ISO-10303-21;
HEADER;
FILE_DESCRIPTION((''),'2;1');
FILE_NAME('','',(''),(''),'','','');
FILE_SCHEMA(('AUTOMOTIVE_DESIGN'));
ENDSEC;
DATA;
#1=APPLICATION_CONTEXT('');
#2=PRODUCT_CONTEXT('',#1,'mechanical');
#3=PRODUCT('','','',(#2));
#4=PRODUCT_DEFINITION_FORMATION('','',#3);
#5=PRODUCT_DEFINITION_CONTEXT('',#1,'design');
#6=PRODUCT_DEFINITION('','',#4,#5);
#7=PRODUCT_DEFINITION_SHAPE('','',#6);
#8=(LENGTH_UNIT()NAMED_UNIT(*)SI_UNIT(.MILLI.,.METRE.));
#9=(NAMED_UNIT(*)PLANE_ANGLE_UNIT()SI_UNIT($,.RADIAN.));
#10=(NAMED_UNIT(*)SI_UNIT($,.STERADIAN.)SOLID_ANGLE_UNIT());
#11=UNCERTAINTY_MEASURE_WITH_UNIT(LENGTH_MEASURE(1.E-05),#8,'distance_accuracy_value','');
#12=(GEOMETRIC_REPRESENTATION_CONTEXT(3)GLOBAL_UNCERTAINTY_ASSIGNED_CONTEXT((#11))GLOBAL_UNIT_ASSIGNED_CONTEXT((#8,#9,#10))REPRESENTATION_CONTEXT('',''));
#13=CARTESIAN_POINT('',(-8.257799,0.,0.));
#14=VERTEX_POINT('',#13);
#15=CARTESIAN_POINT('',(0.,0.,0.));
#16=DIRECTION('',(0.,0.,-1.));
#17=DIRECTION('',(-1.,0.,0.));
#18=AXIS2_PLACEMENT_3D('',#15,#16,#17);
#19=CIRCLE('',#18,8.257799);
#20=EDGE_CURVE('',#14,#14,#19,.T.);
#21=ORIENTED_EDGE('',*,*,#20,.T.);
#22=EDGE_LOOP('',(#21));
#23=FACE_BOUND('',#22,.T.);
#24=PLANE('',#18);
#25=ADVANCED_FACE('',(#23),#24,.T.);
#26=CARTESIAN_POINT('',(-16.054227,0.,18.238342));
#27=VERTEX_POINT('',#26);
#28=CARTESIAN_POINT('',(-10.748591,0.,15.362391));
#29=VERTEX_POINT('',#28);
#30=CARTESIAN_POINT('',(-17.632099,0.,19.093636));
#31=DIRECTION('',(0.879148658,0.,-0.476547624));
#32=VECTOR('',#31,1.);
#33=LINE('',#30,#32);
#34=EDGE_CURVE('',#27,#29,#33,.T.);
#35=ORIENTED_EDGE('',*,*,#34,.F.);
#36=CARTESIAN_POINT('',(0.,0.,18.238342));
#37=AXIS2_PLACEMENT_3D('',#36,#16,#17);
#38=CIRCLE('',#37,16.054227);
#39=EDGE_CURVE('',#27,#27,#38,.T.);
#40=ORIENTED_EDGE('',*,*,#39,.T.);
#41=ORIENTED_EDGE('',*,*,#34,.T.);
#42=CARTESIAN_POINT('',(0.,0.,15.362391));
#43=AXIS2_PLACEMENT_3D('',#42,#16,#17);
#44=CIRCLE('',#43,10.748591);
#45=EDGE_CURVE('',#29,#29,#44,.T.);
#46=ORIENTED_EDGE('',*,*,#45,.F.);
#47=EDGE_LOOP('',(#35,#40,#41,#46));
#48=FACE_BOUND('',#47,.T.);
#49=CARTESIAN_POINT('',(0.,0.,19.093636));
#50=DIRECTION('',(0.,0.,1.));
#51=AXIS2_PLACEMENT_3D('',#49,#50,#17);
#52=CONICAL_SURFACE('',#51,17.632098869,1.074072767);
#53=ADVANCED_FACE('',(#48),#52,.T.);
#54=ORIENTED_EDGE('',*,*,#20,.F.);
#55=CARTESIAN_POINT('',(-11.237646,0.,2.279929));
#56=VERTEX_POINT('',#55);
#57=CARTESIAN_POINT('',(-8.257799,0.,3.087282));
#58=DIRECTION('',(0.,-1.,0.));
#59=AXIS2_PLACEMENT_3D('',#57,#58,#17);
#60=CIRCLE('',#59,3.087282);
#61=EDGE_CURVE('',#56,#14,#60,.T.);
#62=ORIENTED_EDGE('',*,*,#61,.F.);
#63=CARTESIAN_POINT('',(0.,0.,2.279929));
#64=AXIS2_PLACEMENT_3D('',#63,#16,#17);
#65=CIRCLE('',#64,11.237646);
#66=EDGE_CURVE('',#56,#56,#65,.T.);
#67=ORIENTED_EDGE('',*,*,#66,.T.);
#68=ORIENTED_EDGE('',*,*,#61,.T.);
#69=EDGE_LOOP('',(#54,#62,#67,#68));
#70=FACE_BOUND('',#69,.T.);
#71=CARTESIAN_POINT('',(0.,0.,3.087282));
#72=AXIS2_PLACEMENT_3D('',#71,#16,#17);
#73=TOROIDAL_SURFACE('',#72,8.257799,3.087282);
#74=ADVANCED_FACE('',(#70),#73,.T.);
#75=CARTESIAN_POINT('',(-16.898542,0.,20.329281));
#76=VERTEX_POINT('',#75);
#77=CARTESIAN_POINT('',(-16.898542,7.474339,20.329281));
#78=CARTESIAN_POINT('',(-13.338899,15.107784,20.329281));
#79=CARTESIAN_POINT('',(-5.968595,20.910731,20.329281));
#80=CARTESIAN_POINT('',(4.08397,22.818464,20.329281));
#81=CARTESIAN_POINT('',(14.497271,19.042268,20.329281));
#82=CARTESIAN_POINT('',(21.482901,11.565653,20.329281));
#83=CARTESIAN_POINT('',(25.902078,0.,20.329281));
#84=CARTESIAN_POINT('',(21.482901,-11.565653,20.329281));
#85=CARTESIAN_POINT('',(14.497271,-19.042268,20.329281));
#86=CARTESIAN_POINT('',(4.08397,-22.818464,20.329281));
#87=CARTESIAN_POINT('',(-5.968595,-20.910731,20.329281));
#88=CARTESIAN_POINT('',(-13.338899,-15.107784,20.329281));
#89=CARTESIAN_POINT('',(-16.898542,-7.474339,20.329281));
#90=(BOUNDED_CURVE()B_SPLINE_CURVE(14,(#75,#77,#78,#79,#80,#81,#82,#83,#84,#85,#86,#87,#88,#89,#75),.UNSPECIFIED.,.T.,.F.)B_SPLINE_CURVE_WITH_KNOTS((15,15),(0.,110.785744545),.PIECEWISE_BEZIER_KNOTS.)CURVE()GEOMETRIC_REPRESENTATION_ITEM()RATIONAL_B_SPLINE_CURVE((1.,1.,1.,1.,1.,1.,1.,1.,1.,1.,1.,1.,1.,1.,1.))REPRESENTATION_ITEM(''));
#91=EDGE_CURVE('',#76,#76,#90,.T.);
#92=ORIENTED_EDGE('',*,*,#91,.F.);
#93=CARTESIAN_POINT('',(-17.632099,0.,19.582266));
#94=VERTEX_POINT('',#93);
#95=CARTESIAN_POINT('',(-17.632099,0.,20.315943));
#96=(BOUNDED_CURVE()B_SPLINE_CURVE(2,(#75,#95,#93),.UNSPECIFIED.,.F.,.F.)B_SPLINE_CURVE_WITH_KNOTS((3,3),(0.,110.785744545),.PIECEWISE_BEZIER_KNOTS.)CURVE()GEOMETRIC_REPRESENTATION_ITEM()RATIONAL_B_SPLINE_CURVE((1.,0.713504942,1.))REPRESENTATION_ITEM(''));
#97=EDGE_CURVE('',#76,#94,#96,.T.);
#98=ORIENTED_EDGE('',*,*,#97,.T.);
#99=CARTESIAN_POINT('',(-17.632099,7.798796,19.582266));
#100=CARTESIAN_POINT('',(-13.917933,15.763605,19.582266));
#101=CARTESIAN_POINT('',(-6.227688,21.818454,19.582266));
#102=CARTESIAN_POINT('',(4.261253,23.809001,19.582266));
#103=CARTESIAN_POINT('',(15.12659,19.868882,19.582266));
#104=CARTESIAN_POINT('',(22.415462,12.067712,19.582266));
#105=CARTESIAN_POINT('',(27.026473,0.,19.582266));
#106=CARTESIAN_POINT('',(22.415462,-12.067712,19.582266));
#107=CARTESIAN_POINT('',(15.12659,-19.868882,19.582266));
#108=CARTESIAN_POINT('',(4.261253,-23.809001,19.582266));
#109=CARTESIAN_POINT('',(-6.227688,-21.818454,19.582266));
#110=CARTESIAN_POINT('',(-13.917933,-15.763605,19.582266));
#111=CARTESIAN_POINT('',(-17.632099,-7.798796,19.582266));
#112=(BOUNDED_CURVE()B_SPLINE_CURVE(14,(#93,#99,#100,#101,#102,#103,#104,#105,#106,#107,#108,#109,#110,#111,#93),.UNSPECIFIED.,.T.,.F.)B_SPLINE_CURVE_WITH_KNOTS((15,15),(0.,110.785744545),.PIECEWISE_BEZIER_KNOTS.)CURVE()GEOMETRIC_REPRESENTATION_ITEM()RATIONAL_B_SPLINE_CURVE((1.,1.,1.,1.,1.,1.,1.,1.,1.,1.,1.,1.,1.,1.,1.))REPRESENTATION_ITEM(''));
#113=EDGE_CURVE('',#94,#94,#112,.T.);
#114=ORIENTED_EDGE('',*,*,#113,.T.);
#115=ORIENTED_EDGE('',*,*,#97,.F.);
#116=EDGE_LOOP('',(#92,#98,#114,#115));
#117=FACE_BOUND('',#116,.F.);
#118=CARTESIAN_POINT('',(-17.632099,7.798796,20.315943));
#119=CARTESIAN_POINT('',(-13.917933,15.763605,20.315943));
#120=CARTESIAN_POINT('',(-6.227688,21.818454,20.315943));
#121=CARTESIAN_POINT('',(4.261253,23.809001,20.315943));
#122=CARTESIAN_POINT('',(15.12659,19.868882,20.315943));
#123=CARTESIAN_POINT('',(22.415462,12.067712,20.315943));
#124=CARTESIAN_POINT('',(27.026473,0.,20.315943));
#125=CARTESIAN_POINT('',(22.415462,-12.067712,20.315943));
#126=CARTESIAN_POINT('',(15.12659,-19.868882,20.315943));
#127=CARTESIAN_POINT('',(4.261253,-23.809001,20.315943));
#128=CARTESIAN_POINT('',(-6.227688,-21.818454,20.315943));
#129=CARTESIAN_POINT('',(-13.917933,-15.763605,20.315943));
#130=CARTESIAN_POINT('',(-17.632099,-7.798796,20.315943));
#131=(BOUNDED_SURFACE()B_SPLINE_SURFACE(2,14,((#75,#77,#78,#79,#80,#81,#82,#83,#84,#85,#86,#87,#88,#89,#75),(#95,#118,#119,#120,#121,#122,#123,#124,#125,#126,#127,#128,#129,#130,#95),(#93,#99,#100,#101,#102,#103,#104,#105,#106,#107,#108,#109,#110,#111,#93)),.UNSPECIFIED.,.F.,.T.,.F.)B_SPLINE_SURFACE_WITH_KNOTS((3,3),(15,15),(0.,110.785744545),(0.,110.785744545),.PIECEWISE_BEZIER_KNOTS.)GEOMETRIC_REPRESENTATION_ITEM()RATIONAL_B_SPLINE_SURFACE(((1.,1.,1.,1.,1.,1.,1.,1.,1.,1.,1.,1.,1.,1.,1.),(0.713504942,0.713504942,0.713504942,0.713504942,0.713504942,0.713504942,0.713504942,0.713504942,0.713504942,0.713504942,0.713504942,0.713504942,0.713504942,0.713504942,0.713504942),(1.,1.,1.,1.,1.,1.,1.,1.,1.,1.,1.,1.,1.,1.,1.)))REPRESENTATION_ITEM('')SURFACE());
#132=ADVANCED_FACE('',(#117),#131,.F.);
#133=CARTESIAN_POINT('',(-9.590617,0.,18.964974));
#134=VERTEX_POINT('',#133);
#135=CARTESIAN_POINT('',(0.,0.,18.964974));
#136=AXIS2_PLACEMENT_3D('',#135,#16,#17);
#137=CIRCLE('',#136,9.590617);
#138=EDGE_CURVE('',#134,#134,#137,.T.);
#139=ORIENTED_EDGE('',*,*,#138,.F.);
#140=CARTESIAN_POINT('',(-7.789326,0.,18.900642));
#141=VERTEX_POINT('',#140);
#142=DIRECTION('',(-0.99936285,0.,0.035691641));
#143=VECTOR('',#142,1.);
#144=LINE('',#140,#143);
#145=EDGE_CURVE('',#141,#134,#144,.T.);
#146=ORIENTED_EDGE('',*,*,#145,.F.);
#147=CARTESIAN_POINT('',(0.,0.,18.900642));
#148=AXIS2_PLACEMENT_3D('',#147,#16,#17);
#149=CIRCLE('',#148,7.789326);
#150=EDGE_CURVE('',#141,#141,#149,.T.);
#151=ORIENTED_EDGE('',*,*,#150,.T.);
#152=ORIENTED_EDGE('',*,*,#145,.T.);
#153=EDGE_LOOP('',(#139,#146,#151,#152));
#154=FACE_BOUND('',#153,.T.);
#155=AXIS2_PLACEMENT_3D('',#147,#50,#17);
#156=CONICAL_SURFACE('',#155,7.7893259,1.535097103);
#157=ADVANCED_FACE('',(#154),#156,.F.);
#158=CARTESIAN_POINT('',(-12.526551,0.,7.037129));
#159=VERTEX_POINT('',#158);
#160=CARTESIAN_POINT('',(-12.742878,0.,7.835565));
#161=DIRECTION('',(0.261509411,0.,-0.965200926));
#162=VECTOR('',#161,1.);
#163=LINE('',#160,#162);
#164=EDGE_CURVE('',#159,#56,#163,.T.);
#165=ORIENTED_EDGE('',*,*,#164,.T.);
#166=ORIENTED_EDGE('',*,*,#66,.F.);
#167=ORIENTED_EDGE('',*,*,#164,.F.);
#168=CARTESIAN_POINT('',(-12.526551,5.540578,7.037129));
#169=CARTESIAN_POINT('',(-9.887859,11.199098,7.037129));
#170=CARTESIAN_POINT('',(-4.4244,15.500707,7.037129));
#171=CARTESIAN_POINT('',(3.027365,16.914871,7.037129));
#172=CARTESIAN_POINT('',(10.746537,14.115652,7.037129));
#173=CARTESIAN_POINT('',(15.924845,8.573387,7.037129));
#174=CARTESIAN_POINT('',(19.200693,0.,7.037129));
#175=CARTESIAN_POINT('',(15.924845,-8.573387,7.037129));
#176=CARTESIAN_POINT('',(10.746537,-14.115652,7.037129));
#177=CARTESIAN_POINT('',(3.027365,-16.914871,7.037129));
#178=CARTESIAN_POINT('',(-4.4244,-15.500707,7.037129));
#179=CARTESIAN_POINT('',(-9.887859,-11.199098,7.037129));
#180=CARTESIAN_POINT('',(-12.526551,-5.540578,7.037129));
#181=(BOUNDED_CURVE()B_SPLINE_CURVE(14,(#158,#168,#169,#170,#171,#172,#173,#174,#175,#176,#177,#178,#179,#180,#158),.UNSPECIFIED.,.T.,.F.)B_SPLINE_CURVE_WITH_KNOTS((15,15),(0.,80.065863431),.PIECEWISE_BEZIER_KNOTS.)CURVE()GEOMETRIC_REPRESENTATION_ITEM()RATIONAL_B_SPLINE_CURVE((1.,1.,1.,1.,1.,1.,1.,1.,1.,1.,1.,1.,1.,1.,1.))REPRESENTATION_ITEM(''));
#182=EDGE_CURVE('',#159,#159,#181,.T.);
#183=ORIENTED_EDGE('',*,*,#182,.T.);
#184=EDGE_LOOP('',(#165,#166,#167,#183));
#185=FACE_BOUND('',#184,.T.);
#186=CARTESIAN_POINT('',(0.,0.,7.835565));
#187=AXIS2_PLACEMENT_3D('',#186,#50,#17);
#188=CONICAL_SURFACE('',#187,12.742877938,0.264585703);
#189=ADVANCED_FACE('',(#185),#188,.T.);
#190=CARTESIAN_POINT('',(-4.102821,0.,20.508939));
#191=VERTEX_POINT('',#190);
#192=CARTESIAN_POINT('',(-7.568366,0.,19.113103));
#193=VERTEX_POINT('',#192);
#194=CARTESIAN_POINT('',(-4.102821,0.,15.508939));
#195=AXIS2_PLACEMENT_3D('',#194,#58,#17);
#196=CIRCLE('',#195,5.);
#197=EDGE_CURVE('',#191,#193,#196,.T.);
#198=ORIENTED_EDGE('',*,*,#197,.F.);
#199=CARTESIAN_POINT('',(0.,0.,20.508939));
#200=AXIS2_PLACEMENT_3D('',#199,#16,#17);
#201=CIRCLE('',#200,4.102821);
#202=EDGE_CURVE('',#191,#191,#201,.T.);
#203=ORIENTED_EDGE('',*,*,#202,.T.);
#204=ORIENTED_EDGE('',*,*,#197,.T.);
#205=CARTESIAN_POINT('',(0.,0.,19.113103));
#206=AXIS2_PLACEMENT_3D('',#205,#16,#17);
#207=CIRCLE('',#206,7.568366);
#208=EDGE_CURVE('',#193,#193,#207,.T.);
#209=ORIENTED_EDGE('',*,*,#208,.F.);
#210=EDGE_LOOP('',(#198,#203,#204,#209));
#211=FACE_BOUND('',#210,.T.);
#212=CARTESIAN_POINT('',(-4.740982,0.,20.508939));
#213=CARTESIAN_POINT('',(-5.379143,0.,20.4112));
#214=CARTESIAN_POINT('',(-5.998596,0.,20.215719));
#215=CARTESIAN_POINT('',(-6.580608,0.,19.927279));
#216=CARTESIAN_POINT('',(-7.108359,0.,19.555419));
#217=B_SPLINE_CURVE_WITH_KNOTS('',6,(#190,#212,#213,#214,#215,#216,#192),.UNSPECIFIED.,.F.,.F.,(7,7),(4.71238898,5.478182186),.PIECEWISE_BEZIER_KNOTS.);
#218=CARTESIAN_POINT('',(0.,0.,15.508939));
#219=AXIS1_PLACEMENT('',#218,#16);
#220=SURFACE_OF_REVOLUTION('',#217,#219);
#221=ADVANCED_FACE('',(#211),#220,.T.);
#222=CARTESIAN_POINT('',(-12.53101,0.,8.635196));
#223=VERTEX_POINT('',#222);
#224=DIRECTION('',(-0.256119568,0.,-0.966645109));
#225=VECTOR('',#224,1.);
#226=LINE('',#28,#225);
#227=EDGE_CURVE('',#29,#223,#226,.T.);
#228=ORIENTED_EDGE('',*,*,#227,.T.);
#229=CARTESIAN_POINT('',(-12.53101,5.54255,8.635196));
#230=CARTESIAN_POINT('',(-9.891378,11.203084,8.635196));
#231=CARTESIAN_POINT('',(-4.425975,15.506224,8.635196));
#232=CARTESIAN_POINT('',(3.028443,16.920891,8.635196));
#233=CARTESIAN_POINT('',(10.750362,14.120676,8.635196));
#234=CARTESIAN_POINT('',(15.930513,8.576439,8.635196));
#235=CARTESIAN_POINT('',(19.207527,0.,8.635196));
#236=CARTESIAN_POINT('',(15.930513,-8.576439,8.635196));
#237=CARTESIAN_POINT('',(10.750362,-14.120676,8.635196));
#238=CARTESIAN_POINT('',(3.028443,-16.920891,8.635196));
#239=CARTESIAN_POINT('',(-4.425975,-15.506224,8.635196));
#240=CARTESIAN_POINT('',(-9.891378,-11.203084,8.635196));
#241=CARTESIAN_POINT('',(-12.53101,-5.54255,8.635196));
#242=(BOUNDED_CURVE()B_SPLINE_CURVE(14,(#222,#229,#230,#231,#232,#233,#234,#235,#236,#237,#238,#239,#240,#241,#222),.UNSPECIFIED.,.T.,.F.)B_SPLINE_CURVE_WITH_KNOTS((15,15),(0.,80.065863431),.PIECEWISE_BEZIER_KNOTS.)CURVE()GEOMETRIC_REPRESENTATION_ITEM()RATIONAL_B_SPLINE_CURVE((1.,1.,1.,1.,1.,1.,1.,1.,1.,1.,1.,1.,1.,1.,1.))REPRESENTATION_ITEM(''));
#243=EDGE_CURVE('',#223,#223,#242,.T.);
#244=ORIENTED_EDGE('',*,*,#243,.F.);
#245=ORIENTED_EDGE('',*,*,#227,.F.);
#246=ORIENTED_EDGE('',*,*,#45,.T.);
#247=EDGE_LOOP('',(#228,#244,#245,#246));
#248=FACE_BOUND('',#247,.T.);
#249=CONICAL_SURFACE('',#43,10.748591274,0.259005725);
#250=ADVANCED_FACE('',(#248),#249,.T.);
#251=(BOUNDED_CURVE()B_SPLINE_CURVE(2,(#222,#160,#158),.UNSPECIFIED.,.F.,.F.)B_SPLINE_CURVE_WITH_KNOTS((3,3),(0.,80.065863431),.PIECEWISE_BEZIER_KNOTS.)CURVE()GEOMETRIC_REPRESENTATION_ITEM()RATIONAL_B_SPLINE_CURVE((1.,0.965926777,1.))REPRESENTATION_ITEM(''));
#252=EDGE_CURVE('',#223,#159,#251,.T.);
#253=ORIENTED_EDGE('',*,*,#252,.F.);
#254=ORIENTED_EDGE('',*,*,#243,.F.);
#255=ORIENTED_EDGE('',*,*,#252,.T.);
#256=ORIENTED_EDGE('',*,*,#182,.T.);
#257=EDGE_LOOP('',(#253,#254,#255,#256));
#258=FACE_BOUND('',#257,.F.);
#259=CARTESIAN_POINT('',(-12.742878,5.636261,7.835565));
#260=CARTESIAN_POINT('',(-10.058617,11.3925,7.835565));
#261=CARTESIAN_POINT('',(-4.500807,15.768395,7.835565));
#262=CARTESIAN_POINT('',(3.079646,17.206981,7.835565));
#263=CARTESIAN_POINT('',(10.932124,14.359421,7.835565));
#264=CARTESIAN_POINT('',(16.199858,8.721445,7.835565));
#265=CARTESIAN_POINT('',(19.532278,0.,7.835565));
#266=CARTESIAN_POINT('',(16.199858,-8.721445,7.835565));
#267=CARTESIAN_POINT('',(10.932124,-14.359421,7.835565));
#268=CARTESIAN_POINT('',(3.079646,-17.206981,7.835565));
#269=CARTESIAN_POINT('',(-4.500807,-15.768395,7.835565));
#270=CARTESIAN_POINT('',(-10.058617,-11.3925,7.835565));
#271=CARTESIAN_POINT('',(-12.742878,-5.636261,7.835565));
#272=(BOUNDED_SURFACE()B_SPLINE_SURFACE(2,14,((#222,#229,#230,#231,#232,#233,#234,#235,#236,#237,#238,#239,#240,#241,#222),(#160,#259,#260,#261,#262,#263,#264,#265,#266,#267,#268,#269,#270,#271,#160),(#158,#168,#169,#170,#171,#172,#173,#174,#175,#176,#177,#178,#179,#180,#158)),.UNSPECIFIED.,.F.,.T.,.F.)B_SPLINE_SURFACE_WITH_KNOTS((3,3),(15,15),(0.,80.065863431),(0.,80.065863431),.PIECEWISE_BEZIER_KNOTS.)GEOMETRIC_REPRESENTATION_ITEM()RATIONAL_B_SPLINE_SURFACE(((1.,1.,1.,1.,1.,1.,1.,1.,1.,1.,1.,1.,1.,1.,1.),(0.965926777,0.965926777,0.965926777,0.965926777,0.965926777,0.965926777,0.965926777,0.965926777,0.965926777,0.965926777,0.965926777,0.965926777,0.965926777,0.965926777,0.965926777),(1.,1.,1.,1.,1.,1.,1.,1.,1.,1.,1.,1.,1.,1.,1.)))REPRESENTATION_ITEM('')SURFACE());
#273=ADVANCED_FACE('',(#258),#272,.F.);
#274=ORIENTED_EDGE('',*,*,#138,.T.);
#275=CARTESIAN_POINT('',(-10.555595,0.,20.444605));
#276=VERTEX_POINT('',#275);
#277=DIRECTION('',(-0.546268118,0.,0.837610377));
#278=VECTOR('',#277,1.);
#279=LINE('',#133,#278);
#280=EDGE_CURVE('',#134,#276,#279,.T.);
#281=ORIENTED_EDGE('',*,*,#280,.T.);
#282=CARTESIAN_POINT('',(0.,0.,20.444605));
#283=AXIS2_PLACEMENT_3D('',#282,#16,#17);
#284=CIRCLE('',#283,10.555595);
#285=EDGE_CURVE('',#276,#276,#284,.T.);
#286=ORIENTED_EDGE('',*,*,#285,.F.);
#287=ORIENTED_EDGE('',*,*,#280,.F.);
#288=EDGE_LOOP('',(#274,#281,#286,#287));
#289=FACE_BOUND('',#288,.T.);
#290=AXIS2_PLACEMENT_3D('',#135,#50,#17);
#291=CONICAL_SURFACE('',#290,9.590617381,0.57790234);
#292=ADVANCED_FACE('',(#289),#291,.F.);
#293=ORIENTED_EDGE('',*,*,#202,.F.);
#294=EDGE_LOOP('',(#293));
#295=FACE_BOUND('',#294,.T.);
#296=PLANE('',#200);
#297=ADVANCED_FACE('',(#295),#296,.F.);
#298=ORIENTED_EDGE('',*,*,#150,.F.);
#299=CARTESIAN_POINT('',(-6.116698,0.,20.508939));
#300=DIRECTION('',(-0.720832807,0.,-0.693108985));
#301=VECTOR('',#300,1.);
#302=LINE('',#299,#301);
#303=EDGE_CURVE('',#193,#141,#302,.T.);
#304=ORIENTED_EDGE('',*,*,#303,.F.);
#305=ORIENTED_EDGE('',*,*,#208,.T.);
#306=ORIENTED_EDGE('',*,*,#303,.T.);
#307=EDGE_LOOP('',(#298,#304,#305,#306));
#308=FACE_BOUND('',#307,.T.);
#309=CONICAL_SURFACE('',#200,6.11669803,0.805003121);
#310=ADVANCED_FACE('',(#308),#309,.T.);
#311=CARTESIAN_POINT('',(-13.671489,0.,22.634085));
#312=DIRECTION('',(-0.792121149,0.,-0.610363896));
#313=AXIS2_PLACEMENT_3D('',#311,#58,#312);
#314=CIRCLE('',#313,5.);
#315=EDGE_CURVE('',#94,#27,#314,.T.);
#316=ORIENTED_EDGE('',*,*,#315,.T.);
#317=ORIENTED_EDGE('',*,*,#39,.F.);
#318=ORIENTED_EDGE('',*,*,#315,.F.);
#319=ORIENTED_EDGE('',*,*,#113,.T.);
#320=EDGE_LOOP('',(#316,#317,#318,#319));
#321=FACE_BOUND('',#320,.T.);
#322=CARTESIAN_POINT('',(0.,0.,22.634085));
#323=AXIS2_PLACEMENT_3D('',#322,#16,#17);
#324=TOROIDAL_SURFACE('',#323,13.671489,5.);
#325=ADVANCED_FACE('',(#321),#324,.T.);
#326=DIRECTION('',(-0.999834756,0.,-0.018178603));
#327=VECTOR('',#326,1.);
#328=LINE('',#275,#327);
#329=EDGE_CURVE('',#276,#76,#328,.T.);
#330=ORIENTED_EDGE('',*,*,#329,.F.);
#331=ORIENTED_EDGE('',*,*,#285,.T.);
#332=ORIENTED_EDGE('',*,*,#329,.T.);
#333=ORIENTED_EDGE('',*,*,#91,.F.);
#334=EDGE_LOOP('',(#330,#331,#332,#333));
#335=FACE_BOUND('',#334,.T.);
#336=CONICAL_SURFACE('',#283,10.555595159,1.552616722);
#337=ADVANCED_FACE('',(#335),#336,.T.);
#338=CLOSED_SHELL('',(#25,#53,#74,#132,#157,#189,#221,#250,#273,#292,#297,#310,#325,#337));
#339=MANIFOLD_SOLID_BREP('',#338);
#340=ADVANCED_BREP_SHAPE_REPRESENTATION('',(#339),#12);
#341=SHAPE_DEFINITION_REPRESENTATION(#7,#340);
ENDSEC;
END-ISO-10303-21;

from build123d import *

# Parameters (mm, degrees)
F2_R = 5
F3_R = 0.7471384798
F5_R = 3.0872818621


# Not quite as in the source:
# - a fillet or chamfer that OpenCascade refuses, or shapes differently, is made with other operations: its cross-section is extruded or revolved along the edge and cut away or added


with BuildPart() as f1:
    # F0 (on Front) → F1 (revolve)
    with BuildSketch(Plane.XZ):
        Polygon((-10.6199271977, 0), (0, 0), (0, 20.5089394003), (-6.1166980304, 20.5089394003), (-7.7893259004, 18.9006421715), (-9.590617381, 18.9649742097), (-10.5555951595, 20.4446054995), (-17.6320988685, 20.3159432858), (-17.6320988685, 19.0936364233), (-10.748591274, 15.3623912483), (-12.7428779379, 7.8355651349), align=None)
    revolve(axis=Axis((0, 0, 10.2544697002), (0, 0, -1)))

    # F2
    f2_edges = [f1.edges().sort_by_distance(p)[0] for p in [
        (6.116698, 0, 20.508939),
    ]]
    fillet(f2_edges, radius=F2_R)

    # F3
    f3_edges = [f1.edges().sort_by_distance(p)[0] for p in [
        (17.632099, 0, 20.315943),
    ]]
    fillet(f3_edges, radius=F3_R)

    # F4: fillet of radius 5 on 1 edges, made by hand

    # F4_s1 → F4_t2 (revolve, cut)
    with BuildSketch(Plane.XZ):
        with BuildLine():
            ThreePointArc((-17.6320943676, 19.5822655038), (-16.9135613616, 18.827647757), (-16.0542267415, 18.2383416946))
            Line((-16.0542267415, 18.2383416946), (-17.6320988685, 19.0936364233))
            ThreePointArc((-17.6320988685, 19.0936364233), (-17.6320988685, 19.3379509636), (-17.6320943676, 19.5822655038))
        make_face()
    revolve(axis=Axis((0, 0, 19.0936364233), (0, 0, -1)), mode=Mode.SUBTRACT)

    # F5
    f5_edges = [f1.edges().sort_by_distance(p)[0] for p in [
        (12.742878, 0, 7.835565),
        (10.619927, 0, 0),
        (-11.681403, 0, 3.917783),
    ]]
    fillet(f5_edges, radius=F5_R)


solid = f1.part
